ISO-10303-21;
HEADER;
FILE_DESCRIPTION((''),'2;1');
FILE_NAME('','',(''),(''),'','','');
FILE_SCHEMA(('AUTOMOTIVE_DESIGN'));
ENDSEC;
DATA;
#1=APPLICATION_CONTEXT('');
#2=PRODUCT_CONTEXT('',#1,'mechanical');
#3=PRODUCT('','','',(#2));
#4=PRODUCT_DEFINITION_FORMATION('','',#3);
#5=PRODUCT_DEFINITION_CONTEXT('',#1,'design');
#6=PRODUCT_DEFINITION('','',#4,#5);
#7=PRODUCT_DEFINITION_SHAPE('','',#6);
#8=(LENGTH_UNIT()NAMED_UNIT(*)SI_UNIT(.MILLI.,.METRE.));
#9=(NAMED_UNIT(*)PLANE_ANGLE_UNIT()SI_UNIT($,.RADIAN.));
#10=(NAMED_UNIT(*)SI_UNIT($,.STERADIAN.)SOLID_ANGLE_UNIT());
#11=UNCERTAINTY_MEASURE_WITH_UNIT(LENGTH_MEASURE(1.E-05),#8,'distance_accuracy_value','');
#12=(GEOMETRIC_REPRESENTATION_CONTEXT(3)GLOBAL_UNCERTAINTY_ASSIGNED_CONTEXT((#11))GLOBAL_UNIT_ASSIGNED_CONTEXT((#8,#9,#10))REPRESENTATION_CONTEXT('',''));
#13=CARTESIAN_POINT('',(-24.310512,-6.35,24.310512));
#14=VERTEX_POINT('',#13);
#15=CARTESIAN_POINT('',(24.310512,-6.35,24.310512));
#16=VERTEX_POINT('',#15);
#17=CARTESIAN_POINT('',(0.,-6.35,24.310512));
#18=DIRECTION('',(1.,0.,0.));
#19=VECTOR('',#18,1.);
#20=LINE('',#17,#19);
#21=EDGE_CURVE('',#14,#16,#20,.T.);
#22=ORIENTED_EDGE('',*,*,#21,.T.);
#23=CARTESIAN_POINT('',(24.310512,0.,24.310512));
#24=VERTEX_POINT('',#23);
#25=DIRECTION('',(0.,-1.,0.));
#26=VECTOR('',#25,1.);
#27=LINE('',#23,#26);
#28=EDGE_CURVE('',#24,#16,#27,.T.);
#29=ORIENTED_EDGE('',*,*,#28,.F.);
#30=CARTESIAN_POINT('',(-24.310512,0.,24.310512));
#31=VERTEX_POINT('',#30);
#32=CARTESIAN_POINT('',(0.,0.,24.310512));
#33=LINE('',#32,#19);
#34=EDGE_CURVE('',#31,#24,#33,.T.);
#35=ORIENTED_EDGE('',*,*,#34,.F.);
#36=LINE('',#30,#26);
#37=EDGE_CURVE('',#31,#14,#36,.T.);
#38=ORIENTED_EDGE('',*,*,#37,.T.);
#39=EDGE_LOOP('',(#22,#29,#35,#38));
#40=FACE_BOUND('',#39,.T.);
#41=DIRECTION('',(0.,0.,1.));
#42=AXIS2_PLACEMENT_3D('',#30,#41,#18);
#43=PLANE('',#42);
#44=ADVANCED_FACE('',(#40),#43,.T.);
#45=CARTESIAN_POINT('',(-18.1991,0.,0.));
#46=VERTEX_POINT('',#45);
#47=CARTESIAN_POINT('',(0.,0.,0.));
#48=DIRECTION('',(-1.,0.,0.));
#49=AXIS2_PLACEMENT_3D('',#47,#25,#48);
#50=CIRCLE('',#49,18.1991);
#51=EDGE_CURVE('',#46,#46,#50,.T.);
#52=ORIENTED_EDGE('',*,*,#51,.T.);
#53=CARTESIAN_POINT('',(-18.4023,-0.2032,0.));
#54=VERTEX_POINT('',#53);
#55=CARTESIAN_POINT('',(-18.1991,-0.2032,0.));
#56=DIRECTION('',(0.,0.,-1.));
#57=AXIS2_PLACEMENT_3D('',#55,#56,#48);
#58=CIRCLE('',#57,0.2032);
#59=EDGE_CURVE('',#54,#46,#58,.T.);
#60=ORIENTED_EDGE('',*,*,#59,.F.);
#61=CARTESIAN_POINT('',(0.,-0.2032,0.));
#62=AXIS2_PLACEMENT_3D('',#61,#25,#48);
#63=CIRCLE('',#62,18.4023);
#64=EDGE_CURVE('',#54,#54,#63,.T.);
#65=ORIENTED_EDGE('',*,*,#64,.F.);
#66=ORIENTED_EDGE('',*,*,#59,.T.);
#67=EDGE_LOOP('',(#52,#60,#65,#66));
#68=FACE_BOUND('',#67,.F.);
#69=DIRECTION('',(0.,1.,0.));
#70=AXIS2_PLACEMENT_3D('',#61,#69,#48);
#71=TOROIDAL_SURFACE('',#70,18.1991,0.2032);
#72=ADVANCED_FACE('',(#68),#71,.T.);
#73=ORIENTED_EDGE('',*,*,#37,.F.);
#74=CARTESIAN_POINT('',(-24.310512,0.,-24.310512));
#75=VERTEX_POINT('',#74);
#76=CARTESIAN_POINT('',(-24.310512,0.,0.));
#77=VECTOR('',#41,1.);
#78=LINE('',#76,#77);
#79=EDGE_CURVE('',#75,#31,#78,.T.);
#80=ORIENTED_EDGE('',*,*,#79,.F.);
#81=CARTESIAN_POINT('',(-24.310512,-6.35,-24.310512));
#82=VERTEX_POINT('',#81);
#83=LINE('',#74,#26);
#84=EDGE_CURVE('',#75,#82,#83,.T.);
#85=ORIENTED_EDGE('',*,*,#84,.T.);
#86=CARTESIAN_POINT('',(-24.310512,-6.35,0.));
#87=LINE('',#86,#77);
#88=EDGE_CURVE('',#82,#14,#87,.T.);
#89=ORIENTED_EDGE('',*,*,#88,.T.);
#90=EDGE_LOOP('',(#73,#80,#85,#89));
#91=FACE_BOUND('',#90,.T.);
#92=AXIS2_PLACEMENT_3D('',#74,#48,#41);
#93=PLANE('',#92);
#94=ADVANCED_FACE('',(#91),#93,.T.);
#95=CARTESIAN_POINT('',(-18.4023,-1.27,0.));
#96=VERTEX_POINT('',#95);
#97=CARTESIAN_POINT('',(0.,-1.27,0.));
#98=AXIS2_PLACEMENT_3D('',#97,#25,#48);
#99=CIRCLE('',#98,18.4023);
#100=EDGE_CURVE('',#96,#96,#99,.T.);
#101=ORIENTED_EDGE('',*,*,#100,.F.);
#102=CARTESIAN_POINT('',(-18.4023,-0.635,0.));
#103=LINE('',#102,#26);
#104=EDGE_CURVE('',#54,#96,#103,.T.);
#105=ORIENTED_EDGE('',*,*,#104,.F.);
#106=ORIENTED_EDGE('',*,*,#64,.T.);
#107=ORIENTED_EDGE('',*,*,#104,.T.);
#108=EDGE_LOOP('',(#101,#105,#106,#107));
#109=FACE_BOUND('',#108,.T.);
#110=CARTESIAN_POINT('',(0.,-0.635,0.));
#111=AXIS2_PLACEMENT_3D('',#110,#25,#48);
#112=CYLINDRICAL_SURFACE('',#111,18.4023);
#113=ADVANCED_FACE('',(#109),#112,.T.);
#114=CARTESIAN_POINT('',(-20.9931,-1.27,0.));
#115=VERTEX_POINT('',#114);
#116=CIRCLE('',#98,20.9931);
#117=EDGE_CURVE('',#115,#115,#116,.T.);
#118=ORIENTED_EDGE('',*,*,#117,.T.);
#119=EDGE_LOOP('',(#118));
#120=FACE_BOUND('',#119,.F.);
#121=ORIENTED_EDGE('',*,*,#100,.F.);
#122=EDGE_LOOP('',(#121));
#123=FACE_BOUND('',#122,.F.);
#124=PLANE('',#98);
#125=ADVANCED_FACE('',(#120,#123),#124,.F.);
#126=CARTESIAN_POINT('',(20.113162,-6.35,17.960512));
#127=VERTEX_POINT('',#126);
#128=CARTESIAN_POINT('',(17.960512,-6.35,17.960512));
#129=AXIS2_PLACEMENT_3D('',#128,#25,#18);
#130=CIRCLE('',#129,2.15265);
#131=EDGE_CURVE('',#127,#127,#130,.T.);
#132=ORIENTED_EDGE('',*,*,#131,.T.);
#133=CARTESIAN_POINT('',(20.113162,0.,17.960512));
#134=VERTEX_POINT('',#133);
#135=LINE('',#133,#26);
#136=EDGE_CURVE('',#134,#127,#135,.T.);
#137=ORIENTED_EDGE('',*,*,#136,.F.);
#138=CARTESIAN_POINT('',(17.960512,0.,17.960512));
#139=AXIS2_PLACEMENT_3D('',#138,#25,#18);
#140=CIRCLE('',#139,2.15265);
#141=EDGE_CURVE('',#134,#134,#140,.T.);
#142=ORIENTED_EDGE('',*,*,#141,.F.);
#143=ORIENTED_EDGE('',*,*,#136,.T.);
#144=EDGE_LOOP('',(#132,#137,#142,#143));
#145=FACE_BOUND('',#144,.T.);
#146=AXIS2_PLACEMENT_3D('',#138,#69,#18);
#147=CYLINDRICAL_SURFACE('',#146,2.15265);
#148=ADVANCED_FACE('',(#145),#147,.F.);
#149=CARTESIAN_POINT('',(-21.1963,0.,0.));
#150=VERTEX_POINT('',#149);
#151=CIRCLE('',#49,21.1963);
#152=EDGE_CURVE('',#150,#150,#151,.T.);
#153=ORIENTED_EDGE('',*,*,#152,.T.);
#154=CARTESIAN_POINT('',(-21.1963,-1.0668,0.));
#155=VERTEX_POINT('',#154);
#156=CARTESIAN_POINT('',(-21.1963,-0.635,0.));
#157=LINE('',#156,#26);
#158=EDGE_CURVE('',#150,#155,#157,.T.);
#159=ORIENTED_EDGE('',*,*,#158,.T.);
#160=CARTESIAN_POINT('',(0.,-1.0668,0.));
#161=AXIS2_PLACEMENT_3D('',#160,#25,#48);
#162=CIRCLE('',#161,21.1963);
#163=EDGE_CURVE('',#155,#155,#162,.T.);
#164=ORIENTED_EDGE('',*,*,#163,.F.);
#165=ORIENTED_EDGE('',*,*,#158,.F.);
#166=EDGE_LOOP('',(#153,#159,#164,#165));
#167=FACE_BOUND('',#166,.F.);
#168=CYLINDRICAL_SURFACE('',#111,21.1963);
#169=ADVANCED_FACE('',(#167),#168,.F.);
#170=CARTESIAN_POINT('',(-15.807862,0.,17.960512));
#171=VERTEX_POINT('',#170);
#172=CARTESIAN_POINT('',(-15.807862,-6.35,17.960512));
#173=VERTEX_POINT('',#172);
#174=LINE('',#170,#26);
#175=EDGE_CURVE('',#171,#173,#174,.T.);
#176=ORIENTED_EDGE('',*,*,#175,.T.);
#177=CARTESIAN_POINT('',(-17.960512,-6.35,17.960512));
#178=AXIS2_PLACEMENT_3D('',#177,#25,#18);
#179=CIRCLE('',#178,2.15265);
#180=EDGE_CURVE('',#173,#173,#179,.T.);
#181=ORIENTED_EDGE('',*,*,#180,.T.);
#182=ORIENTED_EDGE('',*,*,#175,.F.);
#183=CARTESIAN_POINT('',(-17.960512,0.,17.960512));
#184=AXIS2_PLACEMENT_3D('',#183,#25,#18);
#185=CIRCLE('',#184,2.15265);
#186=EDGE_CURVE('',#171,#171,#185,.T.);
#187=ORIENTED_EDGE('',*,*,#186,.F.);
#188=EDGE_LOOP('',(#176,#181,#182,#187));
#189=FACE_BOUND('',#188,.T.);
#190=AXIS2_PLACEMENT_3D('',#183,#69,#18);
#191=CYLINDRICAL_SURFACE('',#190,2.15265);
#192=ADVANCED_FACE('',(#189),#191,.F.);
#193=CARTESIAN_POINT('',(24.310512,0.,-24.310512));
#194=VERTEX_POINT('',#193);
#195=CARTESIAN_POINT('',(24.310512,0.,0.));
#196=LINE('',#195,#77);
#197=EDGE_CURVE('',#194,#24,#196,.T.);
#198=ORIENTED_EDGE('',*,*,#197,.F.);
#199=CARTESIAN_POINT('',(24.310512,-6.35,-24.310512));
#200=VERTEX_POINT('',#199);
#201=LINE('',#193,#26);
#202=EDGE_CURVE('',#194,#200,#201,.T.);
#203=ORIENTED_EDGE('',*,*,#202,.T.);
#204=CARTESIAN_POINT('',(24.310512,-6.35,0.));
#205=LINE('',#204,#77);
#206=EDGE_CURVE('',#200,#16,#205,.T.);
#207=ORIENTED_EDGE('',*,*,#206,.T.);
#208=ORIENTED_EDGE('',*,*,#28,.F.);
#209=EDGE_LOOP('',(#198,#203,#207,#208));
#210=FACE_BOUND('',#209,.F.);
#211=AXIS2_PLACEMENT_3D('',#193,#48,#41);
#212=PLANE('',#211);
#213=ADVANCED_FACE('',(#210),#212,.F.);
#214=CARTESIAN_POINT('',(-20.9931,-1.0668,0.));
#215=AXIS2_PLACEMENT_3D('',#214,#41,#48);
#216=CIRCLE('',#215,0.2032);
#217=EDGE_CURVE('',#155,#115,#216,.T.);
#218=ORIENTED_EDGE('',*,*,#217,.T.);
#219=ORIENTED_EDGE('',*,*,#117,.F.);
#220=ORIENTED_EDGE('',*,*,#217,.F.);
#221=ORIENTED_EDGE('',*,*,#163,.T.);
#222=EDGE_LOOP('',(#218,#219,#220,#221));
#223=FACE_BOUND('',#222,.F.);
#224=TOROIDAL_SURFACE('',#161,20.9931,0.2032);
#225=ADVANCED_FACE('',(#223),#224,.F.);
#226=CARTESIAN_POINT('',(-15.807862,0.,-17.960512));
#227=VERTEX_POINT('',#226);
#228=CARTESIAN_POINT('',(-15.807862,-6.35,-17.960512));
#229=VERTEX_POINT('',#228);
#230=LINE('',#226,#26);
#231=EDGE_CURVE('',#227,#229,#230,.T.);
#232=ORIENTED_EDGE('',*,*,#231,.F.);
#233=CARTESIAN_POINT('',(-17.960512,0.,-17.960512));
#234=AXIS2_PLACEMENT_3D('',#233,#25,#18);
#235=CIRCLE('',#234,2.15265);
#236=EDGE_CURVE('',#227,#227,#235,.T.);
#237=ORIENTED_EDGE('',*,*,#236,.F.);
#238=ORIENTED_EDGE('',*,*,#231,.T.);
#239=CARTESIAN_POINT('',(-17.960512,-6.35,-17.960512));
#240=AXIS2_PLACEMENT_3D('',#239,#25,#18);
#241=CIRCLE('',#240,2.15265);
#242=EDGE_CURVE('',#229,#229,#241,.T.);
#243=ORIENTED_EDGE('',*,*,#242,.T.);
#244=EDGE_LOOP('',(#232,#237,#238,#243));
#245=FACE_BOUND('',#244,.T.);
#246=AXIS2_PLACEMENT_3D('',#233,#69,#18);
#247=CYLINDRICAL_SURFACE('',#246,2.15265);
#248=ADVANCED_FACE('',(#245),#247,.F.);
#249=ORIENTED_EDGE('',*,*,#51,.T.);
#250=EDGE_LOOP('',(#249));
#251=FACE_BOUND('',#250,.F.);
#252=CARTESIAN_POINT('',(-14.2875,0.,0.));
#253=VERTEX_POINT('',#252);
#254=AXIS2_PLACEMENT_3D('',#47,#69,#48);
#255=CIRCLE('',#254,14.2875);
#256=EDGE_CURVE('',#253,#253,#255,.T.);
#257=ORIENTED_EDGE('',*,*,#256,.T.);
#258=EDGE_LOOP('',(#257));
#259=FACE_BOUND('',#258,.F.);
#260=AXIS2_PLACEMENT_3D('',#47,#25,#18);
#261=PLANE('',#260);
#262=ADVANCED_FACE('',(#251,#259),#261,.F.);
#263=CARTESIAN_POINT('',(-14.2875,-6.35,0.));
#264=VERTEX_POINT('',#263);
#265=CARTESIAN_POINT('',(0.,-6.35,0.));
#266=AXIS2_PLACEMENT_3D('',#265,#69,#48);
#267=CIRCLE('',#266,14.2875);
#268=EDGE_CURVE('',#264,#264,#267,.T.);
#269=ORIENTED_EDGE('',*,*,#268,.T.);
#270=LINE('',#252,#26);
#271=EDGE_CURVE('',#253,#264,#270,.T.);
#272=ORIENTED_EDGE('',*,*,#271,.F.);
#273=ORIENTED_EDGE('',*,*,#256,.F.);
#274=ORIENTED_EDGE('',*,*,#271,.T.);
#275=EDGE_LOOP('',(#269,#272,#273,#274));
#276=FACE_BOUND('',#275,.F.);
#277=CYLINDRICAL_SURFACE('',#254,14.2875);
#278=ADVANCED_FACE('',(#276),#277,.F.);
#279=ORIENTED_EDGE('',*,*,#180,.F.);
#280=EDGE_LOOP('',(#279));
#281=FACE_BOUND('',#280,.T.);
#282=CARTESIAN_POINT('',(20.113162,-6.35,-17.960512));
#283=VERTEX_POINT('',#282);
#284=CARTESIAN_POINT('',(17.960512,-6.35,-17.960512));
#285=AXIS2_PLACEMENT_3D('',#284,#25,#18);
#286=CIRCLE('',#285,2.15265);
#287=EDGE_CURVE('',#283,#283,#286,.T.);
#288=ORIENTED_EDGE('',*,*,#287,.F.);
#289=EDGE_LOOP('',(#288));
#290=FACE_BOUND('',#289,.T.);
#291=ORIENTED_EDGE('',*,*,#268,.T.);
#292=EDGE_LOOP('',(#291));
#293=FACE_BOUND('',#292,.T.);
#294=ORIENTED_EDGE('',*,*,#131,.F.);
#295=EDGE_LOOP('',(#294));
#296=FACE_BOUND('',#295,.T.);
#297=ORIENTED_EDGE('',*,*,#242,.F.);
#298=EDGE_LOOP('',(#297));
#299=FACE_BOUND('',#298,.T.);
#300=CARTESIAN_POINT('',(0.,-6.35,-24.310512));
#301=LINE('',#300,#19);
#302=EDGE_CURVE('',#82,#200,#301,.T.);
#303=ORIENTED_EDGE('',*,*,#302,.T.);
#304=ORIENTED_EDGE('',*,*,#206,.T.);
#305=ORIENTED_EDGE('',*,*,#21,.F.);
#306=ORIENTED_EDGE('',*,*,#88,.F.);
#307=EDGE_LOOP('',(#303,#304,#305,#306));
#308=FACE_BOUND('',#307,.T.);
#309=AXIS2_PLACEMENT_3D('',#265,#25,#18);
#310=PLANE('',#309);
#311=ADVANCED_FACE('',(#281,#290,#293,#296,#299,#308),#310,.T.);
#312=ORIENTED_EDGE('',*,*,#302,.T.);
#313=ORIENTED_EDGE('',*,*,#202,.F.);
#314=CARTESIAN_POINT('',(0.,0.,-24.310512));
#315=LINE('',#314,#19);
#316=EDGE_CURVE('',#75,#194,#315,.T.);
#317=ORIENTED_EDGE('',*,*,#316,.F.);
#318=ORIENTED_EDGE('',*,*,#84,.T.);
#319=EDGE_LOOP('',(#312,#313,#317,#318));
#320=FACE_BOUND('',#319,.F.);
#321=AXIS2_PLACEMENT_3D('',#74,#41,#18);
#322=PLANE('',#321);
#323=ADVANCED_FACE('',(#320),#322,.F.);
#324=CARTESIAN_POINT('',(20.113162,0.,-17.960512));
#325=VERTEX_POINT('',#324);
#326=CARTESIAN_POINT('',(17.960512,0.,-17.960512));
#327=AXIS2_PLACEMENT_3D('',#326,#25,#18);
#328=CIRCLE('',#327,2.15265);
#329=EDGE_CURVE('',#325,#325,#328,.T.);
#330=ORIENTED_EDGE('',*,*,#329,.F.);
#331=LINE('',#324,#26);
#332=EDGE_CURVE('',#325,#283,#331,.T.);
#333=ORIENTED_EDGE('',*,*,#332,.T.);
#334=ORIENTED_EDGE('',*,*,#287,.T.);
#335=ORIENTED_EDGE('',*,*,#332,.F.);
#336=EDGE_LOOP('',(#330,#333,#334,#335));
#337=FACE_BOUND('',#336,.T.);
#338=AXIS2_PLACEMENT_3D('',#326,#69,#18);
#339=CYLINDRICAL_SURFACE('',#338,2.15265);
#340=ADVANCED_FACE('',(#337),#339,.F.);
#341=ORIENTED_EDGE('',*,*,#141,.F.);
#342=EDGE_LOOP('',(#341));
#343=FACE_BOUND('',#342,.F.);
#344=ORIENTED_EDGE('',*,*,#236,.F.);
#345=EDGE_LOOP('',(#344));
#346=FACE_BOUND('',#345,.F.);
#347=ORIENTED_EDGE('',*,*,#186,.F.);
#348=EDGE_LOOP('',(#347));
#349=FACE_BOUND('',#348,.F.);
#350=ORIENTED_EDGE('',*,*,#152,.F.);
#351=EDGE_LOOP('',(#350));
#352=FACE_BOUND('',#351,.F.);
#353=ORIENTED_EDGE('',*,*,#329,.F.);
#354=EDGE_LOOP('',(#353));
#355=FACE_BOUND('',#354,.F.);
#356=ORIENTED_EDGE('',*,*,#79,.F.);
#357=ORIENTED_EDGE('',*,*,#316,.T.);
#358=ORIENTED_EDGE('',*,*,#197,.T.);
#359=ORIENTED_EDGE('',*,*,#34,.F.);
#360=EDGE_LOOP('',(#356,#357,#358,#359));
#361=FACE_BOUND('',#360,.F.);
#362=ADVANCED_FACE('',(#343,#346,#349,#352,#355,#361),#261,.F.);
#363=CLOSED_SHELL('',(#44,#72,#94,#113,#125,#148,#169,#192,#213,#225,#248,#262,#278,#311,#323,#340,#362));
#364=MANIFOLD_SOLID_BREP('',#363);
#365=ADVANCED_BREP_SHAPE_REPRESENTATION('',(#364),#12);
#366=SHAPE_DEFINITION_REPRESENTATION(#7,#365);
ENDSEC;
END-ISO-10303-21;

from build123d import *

# Parameters (mm, degrees)
F0_W      = 48.6210244843
F0_H      = 48.6210244843
F0_R      = 2.15265
F1_DEPTH  = 6.35
F6_W      = 2.794
F6_H      = 1.27
F8_R      = 0.2032
F9_R      = 14.2875
F10_DEPTH = 6.351


with BuildPart() as f1:
    # F0 (on Front) → F1 (new body)
    with BuildSketch(Plane.XZ):
        Rectangle(F0_W, F0_H)
        with Locations((-17.9605122421, -17.9605122421)):
            Circle(F0_R, mode=Mode.SUBTRACT)
        with Locations((17.9605122421, -17.9605122421)):
            Circle(F0_R, mode=Mode.SUBTRACT)
        with Locations((-17.9605122421, 17.9605122421)):
            Circle(F0_R, mode=Mode.SUBTRACT)
        with Locations((17.9605122421, 17.9605122421)):
            Circle(F0_R, mode=Mode.SUBTRACT)
    extrude(amount=F1_DEPTH)

    # F6 (on 3pt) → F7 (revolve, cut)
    with BuildSketch(Plane(origin=(0, 0, 0), x_dir=(1, 0, 0), z_dir=(0, 0, -1))):
        with Locations((-19.7993, 0.635)):
            Rectangle(F6_W, F6_H)
    revolve(axis=Axis((0, 0.4501026124, 0), (0, -1, 0)), mode=Mode.SUBTRACT)

    # F8
    f8_edges = [f1.edges().sort_by_distance(p)[0] for p in [
        (21.1963, -1.27, 0),
        (18.4023, 0, 0),
    ]]
    fillet(f8_edges, radius=F8_R)

    # F9 (on face) → F10 (cut, through all)
    with BuildSketch(Plane(origin=(0, 0, 0), x_dir=(-1, 0, 0), z_dir=(0, 1, 0))):
        Circle(F9_R)
    extrude(amount=-F10_DEPTH, mode=Mode.SUBTRACT)


solid = f1.part
